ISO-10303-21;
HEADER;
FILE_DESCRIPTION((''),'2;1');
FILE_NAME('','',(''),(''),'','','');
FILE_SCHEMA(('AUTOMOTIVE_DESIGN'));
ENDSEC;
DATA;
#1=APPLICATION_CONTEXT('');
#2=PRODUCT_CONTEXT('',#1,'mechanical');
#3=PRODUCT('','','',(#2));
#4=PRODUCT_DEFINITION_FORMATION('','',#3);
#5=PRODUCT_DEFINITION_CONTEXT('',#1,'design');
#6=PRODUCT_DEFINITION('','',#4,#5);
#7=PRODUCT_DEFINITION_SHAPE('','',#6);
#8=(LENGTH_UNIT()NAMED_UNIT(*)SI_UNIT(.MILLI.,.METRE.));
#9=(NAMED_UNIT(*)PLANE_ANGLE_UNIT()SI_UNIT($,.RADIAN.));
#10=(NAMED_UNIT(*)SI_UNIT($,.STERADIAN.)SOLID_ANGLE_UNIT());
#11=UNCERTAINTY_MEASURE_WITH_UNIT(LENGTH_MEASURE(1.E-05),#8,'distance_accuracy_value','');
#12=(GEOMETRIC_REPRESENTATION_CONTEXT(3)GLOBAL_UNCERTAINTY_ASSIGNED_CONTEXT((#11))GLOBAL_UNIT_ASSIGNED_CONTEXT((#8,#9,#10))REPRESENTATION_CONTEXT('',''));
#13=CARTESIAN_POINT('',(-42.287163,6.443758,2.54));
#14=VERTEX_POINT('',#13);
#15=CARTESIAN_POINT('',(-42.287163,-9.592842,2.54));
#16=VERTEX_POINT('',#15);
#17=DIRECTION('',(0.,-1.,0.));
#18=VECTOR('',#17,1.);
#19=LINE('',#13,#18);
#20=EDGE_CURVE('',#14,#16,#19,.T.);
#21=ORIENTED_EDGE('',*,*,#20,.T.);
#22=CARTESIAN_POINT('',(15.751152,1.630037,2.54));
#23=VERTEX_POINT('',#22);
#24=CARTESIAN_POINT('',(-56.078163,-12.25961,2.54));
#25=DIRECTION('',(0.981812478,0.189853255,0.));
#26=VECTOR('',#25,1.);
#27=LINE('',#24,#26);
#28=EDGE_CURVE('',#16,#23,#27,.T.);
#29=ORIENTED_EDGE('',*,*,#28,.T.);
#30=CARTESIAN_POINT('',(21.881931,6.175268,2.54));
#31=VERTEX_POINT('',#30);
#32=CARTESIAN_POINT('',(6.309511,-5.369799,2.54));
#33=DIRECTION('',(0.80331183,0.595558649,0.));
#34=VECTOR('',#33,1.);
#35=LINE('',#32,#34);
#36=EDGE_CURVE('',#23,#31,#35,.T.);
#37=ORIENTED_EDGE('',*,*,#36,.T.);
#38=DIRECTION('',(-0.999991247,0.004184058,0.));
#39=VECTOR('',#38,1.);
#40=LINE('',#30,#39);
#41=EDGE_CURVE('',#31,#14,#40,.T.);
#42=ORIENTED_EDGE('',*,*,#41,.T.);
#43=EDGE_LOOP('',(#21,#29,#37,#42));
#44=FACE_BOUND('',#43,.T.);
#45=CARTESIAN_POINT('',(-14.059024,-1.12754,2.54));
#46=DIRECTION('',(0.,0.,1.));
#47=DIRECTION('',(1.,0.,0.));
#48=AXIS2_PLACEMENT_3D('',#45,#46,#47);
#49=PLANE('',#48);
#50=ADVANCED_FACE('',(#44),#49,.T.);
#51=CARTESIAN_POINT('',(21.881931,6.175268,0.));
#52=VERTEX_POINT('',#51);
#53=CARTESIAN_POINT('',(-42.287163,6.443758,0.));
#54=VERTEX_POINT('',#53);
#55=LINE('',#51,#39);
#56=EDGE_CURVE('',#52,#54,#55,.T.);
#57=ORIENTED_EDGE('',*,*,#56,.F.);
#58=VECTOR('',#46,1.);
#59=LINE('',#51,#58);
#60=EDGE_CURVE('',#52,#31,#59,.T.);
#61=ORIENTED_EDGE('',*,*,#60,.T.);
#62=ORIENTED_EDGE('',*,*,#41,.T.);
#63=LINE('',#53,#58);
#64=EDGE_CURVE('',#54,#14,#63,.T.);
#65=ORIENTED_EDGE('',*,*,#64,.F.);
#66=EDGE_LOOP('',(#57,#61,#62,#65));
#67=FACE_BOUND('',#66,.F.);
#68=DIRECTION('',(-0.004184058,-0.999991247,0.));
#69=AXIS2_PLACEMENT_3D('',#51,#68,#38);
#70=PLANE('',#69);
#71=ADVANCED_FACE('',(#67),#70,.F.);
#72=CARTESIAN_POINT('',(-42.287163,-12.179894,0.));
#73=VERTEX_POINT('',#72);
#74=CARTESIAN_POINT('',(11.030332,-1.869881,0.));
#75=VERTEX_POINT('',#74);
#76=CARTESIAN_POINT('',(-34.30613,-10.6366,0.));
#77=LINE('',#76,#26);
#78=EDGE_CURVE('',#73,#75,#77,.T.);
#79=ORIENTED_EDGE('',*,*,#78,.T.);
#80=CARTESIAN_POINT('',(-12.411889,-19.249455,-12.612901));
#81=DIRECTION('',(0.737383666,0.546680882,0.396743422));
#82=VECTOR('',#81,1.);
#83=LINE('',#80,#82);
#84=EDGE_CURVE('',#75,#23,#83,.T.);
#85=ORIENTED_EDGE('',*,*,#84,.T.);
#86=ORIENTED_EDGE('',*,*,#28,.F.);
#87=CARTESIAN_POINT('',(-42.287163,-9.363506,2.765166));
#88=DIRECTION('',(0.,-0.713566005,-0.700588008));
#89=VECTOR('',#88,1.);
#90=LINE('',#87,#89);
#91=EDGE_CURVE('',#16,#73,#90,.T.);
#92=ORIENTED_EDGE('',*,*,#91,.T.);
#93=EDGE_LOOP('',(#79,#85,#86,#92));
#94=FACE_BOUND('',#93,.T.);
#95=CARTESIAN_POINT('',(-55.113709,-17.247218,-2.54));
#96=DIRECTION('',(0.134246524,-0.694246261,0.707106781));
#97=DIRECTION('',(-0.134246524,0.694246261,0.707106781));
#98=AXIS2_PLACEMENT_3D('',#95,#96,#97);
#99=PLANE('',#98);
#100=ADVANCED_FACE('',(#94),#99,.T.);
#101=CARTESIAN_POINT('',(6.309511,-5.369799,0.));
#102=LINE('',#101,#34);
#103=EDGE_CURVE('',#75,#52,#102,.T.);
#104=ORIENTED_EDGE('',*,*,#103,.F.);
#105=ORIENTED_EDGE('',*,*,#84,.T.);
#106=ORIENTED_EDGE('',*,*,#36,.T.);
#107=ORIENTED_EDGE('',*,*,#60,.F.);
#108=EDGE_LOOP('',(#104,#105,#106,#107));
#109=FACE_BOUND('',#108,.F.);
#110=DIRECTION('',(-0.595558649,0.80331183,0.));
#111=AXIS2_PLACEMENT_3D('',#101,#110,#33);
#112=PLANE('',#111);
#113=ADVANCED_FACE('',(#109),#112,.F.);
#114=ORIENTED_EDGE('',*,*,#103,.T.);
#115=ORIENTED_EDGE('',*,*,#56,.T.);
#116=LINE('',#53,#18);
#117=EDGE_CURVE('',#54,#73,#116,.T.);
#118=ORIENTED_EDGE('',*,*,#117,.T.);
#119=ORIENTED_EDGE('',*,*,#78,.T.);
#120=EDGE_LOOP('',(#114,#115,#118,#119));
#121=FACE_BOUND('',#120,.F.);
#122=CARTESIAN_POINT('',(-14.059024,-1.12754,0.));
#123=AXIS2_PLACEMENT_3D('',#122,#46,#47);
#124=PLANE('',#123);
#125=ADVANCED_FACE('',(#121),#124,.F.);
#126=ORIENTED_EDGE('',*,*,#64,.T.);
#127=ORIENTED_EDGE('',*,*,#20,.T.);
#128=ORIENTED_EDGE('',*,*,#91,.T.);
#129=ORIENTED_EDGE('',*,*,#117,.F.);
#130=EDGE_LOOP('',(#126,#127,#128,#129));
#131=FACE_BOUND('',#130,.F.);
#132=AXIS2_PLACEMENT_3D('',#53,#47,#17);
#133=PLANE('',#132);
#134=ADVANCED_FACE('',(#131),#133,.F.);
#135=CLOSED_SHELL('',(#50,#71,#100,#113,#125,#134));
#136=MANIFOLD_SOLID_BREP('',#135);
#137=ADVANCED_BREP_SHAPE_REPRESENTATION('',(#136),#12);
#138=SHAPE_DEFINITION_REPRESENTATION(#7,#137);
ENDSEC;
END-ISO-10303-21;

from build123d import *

# Parameters (mm, degrees)
F1_DEPTH    = 2.54
F2_T1_DEPTH = 75.625199713


# Not quite as in the source:
# - a fillet or chamfer that OpenCascade refuses, or shapes differently, is made with other operations: its cross-section is extruded or revolved along the edge and cut away or added


with BuildPart() as f1:
    # F0 (on Top) → F1 (new body)
    with BuildSketch(Plane.XY):
        Polygon((21.8819305301, 6.1752684414), (-42.2871634364, 6.4437580295), (-42.2871634364, -14.766946435), (6.30951114, -5.369798746), align=None)
    extrude(amount=F1_DEPTH)

    # F2: chamfer of 5.08 on 1 edges, made by hand

    # F2_s2 → F2_t1 (cut)
    with BuildSketch(Plane(origin=(-56.3420622243, -10.8948746893, 0), x_dir=(0, 0, 1), z_dir=(0.9818124778, 0.1898532551, 0))):
        Polygon((-2.54, 6.4700166401), (2.54, 1.3900166401), (2.54, 6.4700166401), align=None)
    extrude(amount=F2_T1_DEPTH, mode=Mode.SUBTRACT)


solid = f1.part
